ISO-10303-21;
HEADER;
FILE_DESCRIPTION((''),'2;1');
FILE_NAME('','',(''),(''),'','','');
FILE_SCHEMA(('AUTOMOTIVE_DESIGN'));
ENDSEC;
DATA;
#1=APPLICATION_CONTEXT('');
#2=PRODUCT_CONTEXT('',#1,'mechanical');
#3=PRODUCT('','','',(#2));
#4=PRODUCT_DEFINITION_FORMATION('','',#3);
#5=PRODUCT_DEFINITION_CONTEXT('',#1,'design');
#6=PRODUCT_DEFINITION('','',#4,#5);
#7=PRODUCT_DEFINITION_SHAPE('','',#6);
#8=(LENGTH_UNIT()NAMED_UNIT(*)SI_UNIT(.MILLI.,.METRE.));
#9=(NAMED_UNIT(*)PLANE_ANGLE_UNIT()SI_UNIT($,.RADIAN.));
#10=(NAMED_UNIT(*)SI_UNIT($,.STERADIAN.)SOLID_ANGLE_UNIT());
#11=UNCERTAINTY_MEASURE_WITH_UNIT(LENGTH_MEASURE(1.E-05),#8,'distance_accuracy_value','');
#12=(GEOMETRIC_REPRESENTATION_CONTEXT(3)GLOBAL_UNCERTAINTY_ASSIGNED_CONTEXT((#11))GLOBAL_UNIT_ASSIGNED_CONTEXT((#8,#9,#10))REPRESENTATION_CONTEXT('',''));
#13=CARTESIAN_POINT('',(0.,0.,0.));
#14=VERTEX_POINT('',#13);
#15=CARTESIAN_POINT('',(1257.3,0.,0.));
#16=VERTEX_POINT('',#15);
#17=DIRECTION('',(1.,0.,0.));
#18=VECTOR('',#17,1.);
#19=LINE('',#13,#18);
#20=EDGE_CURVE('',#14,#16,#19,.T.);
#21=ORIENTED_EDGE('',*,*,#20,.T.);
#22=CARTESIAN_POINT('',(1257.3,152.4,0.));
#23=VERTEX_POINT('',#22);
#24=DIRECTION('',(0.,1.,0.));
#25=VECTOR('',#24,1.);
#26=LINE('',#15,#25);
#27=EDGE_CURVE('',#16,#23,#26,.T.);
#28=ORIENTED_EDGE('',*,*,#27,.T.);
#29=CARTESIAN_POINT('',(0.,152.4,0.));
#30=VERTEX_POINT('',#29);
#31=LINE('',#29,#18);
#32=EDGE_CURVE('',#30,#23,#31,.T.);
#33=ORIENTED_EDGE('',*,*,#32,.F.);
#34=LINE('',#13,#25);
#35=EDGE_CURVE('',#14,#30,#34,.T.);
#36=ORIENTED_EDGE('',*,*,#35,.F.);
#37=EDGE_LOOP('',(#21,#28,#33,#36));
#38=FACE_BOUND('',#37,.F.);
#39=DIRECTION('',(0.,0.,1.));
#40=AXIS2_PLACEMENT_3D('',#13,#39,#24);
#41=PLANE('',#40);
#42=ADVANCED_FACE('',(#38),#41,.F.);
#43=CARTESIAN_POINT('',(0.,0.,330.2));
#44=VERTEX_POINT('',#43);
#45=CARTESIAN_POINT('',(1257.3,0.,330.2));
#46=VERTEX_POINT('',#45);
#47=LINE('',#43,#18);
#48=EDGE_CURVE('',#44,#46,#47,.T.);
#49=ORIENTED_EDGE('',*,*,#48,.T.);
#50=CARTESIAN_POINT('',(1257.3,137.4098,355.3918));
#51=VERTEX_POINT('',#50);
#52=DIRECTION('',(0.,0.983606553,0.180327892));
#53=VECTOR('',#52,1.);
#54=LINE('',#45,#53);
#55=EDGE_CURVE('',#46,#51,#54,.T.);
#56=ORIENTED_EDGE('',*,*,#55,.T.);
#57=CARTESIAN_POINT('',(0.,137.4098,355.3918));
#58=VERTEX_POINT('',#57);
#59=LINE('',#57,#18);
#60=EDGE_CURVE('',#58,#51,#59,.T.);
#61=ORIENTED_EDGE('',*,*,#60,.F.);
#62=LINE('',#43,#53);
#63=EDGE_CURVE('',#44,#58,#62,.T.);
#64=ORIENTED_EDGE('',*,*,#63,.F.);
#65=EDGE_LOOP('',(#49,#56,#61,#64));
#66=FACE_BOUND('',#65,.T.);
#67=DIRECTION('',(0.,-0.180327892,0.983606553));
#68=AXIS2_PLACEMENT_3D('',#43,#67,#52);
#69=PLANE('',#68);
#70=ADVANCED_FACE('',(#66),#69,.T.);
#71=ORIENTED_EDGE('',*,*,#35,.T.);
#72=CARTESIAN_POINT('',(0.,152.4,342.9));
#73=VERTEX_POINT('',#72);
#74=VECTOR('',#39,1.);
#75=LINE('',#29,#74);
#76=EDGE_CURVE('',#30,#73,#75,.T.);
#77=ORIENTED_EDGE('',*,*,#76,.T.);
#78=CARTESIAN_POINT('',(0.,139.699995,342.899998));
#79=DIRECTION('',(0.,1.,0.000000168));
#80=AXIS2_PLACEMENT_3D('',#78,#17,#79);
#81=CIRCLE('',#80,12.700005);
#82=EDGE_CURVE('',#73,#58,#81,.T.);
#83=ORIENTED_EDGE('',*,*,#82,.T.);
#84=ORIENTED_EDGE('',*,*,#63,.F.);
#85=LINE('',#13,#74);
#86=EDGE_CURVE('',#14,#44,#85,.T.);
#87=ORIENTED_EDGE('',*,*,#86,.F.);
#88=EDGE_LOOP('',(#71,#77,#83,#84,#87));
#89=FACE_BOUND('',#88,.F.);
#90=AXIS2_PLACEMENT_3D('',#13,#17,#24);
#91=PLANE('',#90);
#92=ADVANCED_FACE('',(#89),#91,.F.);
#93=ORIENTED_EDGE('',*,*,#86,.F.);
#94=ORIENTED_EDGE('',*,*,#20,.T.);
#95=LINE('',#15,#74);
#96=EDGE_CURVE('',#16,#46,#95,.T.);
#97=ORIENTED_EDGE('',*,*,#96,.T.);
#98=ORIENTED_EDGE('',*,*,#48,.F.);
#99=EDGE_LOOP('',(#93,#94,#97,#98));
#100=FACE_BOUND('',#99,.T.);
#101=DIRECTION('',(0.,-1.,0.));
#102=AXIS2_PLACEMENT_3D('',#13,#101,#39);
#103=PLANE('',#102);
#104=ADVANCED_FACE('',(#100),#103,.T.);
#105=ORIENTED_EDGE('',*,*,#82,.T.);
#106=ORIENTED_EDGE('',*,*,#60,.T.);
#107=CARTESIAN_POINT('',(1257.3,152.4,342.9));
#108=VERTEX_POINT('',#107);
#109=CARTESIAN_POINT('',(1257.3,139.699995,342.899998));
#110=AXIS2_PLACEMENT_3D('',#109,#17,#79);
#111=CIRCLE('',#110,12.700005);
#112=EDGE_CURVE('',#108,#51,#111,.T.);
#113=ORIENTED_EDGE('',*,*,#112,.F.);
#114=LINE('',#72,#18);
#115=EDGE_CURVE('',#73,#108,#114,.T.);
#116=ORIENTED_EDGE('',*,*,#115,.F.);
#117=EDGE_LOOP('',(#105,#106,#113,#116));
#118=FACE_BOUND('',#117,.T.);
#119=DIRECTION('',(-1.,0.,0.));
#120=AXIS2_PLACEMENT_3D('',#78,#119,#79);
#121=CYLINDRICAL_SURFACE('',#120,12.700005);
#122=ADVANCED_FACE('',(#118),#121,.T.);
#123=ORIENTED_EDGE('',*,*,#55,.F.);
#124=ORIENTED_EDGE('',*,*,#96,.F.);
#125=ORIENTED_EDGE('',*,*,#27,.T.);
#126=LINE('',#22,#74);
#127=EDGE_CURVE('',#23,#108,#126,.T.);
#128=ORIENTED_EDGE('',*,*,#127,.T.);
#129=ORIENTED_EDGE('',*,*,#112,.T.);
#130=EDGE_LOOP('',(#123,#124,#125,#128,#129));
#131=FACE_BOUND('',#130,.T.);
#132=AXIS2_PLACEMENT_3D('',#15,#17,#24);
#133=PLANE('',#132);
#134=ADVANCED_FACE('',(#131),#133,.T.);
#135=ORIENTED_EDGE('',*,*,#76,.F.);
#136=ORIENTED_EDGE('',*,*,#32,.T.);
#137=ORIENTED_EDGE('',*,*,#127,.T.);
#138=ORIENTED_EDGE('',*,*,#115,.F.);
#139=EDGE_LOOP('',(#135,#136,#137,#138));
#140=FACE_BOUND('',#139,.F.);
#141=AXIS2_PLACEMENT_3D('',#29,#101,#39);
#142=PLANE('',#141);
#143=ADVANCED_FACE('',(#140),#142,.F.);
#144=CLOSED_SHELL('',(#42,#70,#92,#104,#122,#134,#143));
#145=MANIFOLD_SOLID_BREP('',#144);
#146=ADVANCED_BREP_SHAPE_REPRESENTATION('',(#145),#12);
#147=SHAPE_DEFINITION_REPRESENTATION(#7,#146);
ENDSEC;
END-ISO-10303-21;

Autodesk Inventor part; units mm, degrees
ref_plane "YZ Plane" through (0, 0, 0) normal (1, 0, 0) x (0, 1, 0)
ref_plane "XZ Plane" through (0, 0, 0) normal (0, 1, 0) x (-1, 0, 0)
ref_plane "XY Plane" through (0, 0, 0) normal (0, 0, 1) x (1, 0, 0)
sketch "Profile" plane through (0, 0, 0) normal (0, 0, 1) x (1, 0, 0)
  line L0 (0, 0) -> (0, 330.2)
  line L1 (0, 0) -> (152.4, 0)
  line L2 (152.4, 0) -> (152.4, 342.9)
  line L3 (152.4, 342.9) -> (139.7, 342.9) construction
  line L4 (152.4, 342.9) -> (139.7, 342.9) construction
  arc A0 (152.4, 342.9) -> (137.4098, 355.3918) centre (139.7, 342.9) ccw
  line L5 (0, 330.2) -> (137.4098, 355.3918)
  dimension "d0" = 330.2
  dimension "d1" = 152.4
  dimension "d2" = 342.9
  dimension "d3" = 12.7
  dimension "d4" = 12.7
sketch "Sketch1" plane through (0, 0, 0) normal (1, 0, 0) x (0, 1, 0)
  line L0 (0, 0) -> (0, 330.2)
  line L1 (0, 0) -> (152.4, 0)
  line L2 (152.4, 0) -> (152.4, 342.9)
  line L3 (152.4, 342.9) -> (139.7, 342.9) construction
  line L4 (152.4, 342.9) -> (139.7, 342.9) construction
  arc A0 (152.4, 342.9) -> (137.4098, 355.3918) centre (139.7, 342.9) ccw
  line L5 (0, 330.2) -> (137.4098, 355.3918)
extrude "Extrusion1" add sketch "Sketch1" along normal blind 1257.3
properties part number "F" material "Granite, Cut, Polished"
